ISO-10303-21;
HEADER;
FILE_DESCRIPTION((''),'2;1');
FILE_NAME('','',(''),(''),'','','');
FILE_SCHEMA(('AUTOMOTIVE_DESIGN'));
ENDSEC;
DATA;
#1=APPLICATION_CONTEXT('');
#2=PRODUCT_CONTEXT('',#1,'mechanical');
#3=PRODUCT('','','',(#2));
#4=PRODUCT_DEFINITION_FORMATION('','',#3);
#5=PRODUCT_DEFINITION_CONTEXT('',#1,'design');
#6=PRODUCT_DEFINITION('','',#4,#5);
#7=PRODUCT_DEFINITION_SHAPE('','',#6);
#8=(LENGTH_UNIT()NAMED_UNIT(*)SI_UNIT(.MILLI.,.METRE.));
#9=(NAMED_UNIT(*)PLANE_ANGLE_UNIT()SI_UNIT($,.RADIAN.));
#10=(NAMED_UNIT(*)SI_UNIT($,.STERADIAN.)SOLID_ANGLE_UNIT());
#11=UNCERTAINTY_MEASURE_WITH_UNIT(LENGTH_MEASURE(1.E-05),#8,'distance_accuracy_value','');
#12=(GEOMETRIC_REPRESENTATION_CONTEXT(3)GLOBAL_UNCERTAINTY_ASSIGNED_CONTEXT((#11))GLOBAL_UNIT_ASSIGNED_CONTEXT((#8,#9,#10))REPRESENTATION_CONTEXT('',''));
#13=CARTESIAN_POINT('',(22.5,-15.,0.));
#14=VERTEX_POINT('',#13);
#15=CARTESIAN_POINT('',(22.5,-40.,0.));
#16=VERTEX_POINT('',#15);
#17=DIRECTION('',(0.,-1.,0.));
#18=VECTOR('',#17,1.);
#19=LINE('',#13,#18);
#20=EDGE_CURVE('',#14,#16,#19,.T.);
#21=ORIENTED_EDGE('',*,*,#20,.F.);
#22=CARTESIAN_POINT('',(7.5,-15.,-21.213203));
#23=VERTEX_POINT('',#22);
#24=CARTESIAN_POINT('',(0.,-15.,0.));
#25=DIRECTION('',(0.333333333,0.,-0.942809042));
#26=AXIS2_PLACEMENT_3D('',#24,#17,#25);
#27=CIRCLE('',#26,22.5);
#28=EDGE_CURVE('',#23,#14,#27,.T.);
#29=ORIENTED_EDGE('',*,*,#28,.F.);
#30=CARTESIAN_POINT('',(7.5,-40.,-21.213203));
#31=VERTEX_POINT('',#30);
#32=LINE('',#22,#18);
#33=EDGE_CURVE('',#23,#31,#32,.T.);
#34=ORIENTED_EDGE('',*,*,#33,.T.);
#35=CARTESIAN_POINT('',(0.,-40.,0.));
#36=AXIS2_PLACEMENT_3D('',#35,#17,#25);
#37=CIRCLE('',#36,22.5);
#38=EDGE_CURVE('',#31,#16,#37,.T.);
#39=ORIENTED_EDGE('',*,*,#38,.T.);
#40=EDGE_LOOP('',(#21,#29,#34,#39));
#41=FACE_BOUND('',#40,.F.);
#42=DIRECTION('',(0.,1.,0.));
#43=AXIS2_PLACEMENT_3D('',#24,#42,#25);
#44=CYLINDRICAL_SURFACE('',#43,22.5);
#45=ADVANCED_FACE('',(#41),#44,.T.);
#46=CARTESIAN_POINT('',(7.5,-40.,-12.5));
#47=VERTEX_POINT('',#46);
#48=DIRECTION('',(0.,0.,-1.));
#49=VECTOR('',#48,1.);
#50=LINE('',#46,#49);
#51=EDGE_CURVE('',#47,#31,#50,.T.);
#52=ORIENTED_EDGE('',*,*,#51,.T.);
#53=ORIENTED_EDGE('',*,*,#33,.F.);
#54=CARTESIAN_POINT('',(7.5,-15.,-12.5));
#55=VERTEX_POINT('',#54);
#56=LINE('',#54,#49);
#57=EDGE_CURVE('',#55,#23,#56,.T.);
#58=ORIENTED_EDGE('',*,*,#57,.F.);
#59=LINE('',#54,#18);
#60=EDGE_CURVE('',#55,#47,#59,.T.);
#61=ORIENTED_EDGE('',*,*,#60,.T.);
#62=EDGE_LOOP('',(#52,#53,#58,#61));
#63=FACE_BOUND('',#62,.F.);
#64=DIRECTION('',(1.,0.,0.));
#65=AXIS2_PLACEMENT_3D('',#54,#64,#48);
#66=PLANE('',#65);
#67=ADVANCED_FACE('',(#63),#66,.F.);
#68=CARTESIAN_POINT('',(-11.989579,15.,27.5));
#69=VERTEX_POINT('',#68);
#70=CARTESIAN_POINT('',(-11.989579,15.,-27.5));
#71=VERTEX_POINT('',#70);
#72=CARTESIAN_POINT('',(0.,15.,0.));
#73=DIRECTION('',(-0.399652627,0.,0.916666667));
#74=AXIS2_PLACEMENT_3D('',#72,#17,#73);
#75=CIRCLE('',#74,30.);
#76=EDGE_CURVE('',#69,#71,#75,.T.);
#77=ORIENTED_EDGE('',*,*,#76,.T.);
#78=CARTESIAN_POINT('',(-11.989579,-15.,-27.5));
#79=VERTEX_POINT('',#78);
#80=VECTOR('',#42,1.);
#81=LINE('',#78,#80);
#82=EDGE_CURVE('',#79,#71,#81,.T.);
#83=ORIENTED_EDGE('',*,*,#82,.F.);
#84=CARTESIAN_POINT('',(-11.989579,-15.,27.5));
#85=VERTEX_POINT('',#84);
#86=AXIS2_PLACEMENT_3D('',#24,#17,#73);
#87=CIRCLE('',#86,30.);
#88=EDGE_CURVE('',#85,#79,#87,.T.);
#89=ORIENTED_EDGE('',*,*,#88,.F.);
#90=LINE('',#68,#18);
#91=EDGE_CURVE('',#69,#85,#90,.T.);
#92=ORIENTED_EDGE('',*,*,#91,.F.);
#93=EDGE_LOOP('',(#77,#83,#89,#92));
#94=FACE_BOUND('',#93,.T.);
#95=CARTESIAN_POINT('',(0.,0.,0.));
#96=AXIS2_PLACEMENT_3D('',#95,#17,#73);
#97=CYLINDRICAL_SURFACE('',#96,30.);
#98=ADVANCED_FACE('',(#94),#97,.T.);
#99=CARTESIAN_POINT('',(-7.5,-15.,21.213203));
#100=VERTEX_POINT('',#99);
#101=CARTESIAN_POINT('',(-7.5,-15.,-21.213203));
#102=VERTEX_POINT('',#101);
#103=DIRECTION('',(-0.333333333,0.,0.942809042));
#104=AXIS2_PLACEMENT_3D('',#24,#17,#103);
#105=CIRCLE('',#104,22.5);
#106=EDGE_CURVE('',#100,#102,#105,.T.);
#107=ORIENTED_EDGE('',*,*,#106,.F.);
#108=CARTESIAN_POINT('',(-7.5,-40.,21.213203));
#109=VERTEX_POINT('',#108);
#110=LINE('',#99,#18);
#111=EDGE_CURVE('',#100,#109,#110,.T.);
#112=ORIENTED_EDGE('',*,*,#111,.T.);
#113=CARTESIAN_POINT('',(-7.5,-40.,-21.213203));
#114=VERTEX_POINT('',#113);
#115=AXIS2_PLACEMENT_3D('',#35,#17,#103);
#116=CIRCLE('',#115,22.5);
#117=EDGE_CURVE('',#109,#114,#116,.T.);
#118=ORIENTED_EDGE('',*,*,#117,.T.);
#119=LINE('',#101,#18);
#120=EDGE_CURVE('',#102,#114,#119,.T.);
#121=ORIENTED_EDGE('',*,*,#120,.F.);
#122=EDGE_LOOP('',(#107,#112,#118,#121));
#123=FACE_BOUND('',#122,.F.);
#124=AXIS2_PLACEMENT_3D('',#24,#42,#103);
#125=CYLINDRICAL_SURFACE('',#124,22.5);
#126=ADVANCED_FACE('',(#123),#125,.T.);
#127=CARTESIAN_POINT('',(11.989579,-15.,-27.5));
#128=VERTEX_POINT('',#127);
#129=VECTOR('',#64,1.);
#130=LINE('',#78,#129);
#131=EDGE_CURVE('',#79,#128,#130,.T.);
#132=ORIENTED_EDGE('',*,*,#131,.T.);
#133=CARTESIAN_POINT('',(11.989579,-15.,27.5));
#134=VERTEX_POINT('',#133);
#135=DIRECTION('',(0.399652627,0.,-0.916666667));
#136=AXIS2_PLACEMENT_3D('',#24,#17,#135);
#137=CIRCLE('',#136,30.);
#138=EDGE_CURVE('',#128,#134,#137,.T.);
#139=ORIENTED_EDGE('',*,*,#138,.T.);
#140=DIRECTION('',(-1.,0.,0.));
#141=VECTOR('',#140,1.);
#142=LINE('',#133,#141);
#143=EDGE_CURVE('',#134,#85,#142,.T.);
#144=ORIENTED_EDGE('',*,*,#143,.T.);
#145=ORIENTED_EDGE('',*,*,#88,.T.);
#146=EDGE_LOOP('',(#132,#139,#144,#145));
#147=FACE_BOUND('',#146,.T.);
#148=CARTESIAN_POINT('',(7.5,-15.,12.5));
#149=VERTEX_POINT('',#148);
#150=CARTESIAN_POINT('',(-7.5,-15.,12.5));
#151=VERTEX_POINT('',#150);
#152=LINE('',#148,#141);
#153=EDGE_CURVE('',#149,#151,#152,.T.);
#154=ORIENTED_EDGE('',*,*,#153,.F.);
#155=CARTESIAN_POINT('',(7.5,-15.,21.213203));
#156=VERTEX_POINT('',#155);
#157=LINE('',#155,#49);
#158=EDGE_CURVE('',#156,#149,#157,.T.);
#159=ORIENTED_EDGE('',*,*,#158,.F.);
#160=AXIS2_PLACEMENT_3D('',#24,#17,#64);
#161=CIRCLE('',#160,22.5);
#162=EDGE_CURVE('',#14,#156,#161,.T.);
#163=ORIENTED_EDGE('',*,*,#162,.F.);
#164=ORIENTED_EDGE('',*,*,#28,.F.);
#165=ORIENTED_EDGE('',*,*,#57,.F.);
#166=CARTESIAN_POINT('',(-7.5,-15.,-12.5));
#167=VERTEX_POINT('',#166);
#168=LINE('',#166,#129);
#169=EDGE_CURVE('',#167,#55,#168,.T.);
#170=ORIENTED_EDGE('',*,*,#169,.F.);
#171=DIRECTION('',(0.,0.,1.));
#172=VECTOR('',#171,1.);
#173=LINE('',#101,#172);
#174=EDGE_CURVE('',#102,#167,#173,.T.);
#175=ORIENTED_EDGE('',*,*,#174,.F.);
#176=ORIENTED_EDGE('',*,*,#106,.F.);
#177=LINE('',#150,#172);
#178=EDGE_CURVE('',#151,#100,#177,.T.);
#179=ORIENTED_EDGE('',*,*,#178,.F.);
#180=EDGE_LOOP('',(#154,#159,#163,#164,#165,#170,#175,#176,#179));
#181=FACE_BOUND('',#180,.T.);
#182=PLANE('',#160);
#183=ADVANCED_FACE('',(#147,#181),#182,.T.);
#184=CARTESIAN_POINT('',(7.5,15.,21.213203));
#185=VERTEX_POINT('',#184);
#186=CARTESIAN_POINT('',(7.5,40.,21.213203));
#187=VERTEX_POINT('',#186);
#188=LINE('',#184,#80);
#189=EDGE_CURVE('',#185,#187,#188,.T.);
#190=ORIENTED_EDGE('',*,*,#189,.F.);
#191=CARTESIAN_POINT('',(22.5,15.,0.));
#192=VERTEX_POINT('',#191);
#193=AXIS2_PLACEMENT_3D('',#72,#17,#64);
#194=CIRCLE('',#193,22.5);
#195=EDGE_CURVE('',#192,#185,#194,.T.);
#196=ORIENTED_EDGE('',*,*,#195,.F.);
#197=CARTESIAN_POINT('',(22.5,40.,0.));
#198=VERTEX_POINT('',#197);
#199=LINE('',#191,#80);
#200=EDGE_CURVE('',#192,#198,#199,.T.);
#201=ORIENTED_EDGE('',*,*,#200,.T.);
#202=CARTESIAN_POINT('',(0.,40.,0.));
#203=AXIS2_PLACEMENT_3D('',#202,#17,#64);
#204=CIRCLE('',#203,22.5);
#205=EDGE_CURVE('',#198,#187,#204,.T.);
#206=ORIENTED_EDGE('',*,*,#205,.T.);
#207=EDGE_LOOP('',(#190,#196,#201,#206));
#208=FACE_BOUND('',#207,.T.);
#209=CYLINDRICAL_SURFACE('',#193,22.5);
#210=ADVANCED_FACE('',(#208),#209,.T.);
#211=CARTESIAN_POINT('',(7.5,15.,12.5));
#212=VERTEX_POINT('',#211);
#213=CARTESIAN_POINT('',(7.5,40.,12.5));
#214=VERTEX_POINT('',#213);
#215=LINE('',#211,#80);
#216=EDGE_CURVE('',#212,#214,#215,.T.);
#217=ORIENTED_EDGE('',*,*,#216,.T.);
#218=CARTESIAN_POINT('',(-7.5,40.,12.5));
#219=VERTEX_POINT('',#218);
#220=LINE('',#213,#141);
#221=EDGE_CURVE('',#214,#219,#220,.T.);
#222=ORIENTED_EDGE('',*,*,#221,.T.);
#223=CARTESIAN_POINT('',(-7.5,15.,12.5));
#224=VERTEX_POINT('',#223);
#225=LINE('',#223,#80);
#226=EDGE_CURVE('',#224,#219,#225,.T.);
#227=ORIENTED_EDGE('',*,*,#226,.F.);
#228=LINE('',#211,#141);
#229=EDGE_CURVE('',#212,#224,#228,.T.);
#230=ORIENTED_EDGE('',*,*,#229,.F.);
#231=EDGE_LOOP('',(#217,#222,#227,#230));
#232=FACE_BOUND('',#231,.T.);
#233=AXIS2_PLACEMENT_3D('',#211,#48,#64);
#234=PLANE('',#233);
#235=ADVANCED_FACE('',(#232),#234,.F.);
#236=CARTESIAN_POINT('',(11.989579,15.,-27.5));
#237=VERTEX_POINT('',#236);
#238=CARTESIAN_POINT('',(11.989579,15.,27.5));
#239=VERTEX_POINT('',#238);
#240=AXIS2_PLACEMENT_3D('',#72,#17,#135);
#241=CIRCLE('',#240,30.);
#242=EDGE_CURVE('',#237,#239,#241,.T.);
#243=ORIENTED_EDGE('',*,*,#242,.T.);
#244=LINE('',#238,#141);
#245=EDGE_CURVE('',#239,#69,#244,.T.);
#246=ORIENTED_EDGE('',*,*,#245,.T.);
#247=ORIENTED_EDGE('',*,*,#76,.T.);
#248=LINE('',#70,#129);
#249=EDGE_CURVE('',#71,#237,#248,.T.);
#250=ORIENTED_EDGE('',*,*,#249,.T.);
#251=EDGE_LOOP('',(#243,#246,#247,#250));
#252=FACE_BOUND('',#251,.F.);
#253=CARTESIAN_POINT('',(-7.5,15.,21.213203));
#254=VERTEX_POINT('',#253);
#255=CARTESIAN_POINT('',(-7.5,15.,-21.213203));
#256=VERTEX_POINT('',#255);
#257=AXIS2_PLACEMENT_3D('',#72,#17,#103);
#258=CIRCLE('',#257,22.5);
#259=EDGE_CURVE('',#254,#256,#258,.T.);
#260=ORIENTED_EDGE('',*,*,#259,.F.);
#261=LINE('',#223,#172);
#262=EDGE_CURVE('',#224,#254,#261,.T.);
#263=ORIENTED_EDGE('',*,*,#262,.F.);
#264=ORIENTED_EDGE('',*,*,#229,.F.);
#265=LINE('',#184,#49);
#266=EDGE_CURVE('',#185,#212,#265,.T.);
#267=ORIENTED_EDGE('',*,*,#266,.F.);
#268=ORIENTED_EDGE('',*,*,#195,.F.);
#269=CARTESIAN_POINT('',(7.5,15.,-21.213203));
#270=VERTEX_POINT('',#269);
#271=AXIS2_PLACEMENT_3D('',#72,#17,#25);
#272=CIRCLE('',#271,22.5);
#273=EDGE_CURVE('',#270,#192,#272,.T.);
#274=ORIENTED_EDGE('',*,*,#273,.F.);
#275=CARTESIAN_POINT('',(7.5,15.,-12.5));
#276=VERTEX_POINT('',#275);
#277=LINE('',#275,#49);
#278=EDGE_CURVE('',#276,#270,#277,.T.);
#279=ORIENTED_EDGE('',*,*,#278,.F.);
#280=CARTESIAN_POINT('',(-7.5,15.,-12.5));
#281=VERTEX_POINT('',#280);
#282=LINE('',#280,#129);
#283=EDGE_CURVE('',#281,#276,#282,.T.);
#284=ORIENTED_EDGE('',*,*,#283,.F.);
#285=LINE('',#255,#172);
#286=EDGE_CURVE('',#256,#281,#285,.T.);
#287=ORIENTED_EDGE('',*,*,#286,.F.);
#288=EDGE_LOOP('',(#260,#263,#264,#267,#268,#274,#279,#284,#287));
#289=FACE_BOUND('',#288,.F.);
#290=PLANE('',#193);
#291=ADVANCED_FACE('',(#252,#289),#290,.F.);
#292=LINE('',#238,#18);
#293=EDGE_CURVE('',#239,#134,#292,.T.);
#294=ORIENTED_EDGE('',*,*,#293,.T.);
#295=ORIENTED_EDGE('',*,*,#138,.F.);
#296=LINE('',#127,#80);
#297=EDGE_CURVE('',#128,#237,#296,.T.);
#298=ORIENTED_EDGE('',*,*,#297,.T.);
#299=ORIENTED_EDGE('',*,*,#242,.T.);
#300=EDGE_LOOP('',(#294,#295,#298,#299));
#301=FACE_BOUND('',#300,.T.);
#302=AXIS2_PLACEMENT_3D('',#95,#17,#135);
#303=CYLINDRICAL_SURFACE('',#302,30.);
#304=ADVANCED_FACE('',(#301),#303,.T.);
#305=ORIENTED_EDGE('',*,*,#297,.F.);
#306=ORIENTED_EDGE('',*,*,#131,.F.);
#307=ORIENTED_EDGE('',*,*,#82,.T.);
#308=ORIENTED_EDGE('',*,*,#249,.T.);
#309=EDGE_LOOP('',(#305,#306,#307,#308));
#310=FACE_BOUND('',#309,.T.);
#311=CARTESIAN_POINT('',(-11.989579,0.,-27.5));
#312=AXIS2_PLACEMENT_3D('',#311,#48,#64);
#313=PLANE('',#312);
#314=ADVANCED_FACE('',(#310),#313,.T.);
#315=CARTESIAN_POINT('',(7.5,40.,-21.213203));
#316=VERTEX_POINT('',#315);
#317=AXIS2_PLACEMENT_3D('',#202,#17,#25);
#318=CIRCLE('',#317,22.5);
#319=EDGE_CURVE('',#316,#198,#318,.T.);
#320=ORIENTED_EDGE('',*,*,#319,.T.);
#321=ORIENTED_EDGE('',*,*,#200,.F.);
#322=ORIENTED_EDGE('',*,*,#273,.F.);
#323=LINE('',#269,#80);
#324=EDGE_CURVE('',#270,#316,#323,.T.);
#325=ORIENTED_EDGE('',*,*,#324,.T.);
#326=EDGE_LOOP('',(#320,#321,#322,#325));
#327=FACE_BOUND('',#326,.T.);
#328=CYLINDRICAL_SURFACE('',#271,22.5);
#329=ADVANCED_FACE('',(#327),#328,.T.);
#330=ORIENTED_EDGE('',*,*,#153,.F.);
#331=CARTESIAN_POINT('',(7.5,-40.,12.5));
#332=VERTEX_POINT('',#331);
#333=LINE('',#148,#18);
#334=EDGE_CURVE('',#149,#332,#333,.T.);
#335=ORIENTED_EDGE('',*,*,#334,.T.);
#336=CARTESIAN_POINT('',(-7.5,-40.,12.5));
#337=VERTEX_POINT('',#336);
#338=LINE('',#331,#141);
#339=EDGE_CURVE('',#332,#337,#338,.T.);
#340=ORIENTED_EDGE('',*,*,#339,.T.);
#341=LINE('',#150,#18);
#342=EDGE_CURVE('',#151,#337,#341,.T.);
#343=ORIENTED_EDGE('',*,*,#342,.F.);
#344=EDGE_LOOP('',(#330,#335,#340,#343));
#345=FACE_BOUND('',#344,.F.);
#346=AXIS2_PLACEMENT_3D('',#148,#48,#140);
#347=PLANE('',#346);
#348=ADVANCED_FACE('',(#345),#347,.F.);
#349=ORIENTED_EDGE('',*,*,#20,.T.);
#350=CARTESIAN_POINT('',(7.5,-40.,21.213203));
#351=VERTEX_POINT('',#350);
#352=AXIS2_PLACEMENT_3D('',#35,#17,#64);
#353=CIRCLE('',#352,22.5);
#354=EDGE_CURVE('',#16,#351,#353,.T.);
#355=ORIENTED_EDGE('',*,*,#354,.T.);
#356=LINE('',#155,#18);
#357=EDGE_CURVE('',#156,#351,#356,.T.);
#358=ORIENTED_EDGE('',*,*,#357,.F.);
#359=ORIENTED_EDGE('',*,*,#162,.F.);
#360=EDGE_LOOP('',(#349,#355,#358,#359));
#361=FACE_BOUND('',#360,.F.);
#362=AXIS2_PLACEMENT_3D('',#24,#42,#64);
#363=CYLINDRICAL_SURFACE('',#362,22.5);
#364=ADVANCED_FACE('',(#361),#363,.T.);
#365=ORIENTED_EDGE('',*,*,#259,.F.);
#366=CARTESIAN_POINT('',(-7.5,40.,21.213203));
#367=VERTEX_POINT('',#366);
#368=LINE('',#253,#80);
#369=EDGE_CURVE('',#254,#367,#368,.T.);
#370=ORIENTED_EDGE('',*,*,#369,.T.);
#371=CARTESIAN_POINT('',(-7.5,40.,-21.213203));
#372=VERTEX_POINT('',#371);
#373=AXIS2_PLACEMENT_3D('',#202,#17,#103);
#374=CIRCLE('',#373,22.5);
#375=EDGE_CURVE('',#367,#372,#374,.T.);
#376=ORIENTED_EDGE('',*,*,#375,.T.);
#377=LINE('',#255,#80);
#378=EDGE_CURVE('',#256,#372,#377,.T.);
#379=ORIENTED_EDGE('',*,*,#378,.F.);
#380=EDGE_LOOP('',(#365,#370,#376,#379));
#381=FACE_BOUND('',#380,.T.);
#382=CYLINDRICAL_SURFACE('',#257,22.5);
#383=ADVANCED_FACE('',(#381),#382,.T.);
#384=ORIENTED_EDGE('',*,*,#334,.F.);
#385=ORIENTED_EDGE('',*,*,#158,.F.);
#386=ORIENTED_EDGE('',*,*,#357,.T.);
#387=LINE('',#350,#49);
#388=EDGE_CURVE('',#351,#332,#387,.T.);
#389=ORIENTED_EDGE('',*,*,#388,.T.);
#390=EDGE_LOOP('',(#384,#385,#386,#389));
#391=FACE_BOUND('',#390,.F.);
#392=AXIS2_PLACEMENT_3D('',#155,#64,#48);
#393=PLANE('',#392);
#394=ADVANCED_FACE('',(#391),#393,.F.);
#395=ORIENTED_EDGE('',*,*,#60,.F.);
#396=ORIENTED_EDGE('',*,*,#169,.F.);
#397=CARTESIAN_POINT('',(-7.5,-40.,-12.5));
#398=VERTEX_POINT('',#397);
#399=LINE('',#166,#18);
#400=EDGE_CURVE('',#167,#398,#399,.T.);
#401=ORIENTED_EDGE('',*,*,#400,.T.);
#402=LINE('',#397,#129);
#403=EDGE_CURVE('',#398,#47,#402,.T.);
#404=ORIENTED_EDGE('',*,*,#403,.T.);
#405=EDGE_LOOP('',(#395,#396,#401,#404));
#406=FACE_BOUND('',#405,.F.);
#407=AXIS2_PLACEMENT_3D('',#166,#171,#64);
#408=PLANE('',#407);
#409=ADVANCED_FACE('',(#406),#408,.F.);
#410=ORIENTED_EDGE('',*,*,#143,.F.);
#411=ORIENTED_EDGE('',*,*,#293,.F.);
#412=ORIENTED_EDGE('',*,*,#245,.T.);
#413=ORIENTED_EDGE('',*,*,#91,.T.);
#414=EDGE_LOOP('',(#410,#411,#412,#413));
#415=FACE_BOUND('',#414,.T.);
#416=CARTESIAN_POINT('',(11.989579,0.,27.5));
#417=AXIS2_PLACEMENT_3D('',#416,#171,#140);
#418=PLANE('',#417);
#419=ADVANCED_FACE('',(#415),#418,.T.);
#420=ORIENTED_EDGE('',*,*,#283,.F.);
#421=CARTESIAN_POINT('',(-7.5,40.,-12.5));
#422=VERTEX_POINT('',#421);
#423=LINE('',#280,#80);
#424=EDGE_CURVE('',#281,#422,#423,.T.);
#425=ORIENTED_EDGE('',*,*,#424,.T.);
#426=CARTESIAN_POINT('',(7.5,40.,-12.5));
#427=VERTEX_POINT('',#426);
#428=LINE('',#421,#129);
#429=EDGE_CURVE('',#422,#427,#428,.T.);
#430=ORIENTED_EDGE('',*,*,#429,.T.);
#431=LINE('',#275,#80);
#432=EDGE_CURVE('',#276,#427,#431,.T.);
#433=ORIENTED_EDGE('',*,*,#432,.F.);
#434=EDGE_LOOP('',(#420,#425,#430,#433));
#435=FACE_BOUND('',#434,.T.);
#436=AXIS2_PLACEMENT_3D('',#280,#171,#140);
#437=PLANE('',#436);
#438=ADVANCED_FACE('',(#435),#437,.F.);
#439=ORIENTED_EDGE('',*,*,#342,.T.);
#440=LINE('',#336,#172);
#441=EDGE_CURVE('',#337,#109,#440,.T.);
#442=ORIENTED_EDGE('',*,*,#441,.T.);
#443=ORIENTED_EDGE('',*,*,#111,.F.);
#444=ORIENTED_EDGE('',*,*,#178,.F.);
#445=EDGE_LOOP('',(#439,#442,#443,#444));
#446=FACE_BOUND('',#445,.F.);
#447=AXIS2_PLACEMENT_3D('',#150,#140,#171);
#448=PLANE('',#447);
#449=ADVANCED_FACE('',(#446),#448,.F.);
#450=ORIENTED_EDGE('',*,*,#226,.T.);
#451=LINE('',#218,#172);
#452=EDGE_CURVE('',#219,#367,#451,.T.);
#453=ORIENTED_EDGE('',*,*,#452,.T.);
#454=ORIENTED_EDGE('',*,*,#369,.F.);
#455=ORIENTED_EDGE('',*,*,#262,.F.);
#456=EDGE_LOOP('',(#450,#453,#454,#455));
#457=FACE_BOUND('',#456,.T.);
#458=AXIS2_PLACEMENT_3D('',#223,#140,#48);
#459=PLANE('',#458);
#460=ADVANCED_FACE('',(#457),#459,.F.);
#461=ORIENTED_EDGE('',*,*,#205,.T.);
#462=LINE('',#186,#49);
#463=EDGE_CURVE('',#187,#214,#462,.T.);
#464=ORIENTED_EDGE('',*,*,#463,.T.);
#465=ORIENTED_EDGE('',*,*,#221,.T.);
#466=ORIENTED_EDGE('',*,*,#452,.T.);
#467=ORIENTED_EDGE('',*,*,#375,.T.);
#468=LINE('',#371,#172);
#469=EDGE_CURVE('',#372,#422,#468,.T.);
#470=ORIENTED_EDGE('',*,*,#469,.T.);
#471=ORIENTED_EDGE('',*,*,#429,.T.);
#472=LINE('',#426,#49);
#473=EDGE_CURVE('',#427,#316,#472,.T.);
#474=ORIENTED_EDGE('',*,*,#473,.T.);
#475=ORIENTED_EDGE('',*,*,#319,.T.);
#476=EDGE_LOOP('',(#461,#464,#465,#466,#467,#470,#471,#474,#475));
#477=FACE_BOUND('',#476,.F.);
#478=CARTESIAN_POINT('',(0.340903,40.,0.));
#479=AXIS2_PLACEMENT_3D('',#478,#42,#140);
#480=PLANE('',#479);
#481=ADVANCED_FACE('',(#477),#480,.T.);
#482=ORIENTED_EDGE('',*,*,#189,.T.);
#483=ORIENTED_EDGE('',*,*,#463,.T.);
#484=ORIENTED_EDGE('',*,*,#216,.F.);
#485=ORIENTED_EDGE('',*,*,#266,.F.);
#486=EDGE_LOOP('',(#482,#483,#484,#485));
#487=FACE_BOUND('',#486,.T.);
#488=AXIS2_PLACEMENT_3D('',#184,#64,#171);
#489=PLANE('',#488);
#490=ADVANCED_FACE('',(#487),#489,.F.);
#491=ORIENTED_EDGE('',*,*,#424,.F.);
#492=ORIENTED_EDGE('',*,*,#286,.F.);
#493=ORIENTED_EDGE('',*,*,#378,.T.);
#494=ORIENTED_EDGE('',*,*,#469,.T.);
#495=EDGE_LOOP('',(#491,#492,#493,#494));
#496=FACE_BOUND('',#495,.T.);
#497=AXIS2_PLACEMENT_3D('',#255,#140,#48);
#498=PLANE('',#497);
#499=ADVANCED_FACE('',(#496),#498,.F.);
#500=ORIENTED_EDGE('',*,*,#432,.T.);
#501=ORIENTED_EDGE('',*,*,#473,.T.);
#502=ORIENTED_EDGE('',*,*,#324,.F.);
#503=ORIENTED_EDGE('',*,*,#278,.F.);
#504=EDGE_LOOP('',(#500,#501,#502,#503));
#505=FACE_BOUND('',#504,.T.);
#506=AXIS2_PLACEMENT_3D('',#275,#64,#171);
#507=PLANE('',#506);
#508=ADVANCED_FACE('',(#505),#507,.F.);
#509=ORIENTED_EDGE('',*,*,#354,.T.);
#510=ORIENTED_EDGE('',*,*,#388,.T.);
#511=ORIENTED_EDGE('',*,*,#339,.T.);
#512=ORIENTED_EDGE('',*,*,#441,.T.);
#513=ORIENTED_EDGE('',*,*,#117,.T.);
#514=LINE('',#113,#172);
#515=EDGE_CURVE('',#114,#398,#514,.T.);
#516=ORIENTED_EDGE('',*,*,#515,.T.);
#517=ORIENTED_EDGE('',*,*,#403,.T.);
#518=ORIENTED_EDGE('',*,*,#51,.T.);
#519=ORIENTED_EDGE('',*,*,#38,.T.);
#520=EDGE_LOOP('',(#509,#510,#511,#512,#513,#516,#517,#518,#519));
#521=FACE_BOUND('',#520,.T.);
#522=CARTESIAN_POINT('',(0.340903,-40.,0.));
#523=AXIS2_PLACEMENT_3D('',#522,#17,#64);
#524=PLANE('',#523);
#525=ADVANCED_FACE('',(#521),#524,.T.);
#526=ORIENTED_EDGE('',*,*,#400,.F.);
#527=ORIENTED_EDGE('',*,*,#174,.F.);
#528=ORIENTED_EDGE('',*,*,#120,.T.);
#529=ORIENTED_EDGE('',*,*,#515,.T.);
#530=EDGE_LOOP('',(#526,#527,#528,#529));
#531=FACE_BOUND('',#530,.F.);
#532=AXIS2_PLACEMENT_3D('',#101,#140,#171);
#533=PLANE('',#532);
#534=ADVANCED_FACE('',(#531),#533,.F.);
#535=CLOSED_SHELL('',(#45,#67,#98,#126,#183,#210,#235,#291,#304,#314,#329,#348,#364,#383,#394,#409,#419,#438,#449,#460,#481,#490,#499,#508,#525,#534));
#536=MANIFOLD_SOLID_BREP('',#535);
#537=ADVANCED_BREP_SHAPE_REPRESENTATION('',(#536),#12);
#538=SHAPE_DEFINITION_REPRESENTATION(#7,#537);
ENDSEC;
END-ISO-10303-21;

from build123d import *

# Parameters (mm, degrees)
F1_DEPTH = 15
F3_DEPTH = 25


# Not quite as in the source:
# - a pattern or mirror of a feature is missing from the dataset's text; its kind, count and spacing are read off the source's solid


with BuildPart() as f1:
    # F0 (on Front) → F1 (new body, symmetric)
    with BuildSketch(Plane.XZ):
        with BuildLine():
            ThreePointArc((11.9895788083, -27.5), (25.0966866762, -16.4364326384), (30, 0))
            ThreePointArc((30, 0), (25.0966866762, 16.4364326384), (11.9895788083, 27.5))
            Line((11.9895788083, 27.5), (-11.9895788083, 27.5))
            ThreePointArc((-11.9895788083, 27.5), (-30, 0), (-11.9895788083, -27.5))
            Line((-11.9895788083, -27.5), (11.9895788083, -27.5))
        make_face()
    extrude(amount=F1_DEPTH, both=True)

    # F2 (on face) → F3 (join)
    with BuildSketch(Plane.XZ.offset(15)):
        with BuildLine():
            ThreePointArc((7.5, -21.2132034356), (18.3711730709, -12.9903810568), (22.5, 0))
            ThreePointArc((22.5, 0), (18.3711730709, 12.9903810568), (7.5, 21.2132034356))
            Line((7.5, 21.2132034356), (7.5, 12.5))
            Line((7.5, 12.5), (-7.5, 12.5))
            Line((-7.5, 12.5), (-7.5, 21.2132034356))
            ThreePointArc((-7.5, 21.2132034356), (-22.5, 0), (-7.5, -21.2132034356))
            Line((-7.5, -21.2132034356), (-7.5, -12.5))
            Line((-7.5, -12.5), (7.5, -12.5))
            Line((7.5, -12.5), (7.5, -21.2132034356))
        make_face()
    f3 = extrude(amount=F3_DEPTH)

    # F3_copies: F3 across plane
    add(f3.mirror(Plane.ZX))


solid = f1.part
